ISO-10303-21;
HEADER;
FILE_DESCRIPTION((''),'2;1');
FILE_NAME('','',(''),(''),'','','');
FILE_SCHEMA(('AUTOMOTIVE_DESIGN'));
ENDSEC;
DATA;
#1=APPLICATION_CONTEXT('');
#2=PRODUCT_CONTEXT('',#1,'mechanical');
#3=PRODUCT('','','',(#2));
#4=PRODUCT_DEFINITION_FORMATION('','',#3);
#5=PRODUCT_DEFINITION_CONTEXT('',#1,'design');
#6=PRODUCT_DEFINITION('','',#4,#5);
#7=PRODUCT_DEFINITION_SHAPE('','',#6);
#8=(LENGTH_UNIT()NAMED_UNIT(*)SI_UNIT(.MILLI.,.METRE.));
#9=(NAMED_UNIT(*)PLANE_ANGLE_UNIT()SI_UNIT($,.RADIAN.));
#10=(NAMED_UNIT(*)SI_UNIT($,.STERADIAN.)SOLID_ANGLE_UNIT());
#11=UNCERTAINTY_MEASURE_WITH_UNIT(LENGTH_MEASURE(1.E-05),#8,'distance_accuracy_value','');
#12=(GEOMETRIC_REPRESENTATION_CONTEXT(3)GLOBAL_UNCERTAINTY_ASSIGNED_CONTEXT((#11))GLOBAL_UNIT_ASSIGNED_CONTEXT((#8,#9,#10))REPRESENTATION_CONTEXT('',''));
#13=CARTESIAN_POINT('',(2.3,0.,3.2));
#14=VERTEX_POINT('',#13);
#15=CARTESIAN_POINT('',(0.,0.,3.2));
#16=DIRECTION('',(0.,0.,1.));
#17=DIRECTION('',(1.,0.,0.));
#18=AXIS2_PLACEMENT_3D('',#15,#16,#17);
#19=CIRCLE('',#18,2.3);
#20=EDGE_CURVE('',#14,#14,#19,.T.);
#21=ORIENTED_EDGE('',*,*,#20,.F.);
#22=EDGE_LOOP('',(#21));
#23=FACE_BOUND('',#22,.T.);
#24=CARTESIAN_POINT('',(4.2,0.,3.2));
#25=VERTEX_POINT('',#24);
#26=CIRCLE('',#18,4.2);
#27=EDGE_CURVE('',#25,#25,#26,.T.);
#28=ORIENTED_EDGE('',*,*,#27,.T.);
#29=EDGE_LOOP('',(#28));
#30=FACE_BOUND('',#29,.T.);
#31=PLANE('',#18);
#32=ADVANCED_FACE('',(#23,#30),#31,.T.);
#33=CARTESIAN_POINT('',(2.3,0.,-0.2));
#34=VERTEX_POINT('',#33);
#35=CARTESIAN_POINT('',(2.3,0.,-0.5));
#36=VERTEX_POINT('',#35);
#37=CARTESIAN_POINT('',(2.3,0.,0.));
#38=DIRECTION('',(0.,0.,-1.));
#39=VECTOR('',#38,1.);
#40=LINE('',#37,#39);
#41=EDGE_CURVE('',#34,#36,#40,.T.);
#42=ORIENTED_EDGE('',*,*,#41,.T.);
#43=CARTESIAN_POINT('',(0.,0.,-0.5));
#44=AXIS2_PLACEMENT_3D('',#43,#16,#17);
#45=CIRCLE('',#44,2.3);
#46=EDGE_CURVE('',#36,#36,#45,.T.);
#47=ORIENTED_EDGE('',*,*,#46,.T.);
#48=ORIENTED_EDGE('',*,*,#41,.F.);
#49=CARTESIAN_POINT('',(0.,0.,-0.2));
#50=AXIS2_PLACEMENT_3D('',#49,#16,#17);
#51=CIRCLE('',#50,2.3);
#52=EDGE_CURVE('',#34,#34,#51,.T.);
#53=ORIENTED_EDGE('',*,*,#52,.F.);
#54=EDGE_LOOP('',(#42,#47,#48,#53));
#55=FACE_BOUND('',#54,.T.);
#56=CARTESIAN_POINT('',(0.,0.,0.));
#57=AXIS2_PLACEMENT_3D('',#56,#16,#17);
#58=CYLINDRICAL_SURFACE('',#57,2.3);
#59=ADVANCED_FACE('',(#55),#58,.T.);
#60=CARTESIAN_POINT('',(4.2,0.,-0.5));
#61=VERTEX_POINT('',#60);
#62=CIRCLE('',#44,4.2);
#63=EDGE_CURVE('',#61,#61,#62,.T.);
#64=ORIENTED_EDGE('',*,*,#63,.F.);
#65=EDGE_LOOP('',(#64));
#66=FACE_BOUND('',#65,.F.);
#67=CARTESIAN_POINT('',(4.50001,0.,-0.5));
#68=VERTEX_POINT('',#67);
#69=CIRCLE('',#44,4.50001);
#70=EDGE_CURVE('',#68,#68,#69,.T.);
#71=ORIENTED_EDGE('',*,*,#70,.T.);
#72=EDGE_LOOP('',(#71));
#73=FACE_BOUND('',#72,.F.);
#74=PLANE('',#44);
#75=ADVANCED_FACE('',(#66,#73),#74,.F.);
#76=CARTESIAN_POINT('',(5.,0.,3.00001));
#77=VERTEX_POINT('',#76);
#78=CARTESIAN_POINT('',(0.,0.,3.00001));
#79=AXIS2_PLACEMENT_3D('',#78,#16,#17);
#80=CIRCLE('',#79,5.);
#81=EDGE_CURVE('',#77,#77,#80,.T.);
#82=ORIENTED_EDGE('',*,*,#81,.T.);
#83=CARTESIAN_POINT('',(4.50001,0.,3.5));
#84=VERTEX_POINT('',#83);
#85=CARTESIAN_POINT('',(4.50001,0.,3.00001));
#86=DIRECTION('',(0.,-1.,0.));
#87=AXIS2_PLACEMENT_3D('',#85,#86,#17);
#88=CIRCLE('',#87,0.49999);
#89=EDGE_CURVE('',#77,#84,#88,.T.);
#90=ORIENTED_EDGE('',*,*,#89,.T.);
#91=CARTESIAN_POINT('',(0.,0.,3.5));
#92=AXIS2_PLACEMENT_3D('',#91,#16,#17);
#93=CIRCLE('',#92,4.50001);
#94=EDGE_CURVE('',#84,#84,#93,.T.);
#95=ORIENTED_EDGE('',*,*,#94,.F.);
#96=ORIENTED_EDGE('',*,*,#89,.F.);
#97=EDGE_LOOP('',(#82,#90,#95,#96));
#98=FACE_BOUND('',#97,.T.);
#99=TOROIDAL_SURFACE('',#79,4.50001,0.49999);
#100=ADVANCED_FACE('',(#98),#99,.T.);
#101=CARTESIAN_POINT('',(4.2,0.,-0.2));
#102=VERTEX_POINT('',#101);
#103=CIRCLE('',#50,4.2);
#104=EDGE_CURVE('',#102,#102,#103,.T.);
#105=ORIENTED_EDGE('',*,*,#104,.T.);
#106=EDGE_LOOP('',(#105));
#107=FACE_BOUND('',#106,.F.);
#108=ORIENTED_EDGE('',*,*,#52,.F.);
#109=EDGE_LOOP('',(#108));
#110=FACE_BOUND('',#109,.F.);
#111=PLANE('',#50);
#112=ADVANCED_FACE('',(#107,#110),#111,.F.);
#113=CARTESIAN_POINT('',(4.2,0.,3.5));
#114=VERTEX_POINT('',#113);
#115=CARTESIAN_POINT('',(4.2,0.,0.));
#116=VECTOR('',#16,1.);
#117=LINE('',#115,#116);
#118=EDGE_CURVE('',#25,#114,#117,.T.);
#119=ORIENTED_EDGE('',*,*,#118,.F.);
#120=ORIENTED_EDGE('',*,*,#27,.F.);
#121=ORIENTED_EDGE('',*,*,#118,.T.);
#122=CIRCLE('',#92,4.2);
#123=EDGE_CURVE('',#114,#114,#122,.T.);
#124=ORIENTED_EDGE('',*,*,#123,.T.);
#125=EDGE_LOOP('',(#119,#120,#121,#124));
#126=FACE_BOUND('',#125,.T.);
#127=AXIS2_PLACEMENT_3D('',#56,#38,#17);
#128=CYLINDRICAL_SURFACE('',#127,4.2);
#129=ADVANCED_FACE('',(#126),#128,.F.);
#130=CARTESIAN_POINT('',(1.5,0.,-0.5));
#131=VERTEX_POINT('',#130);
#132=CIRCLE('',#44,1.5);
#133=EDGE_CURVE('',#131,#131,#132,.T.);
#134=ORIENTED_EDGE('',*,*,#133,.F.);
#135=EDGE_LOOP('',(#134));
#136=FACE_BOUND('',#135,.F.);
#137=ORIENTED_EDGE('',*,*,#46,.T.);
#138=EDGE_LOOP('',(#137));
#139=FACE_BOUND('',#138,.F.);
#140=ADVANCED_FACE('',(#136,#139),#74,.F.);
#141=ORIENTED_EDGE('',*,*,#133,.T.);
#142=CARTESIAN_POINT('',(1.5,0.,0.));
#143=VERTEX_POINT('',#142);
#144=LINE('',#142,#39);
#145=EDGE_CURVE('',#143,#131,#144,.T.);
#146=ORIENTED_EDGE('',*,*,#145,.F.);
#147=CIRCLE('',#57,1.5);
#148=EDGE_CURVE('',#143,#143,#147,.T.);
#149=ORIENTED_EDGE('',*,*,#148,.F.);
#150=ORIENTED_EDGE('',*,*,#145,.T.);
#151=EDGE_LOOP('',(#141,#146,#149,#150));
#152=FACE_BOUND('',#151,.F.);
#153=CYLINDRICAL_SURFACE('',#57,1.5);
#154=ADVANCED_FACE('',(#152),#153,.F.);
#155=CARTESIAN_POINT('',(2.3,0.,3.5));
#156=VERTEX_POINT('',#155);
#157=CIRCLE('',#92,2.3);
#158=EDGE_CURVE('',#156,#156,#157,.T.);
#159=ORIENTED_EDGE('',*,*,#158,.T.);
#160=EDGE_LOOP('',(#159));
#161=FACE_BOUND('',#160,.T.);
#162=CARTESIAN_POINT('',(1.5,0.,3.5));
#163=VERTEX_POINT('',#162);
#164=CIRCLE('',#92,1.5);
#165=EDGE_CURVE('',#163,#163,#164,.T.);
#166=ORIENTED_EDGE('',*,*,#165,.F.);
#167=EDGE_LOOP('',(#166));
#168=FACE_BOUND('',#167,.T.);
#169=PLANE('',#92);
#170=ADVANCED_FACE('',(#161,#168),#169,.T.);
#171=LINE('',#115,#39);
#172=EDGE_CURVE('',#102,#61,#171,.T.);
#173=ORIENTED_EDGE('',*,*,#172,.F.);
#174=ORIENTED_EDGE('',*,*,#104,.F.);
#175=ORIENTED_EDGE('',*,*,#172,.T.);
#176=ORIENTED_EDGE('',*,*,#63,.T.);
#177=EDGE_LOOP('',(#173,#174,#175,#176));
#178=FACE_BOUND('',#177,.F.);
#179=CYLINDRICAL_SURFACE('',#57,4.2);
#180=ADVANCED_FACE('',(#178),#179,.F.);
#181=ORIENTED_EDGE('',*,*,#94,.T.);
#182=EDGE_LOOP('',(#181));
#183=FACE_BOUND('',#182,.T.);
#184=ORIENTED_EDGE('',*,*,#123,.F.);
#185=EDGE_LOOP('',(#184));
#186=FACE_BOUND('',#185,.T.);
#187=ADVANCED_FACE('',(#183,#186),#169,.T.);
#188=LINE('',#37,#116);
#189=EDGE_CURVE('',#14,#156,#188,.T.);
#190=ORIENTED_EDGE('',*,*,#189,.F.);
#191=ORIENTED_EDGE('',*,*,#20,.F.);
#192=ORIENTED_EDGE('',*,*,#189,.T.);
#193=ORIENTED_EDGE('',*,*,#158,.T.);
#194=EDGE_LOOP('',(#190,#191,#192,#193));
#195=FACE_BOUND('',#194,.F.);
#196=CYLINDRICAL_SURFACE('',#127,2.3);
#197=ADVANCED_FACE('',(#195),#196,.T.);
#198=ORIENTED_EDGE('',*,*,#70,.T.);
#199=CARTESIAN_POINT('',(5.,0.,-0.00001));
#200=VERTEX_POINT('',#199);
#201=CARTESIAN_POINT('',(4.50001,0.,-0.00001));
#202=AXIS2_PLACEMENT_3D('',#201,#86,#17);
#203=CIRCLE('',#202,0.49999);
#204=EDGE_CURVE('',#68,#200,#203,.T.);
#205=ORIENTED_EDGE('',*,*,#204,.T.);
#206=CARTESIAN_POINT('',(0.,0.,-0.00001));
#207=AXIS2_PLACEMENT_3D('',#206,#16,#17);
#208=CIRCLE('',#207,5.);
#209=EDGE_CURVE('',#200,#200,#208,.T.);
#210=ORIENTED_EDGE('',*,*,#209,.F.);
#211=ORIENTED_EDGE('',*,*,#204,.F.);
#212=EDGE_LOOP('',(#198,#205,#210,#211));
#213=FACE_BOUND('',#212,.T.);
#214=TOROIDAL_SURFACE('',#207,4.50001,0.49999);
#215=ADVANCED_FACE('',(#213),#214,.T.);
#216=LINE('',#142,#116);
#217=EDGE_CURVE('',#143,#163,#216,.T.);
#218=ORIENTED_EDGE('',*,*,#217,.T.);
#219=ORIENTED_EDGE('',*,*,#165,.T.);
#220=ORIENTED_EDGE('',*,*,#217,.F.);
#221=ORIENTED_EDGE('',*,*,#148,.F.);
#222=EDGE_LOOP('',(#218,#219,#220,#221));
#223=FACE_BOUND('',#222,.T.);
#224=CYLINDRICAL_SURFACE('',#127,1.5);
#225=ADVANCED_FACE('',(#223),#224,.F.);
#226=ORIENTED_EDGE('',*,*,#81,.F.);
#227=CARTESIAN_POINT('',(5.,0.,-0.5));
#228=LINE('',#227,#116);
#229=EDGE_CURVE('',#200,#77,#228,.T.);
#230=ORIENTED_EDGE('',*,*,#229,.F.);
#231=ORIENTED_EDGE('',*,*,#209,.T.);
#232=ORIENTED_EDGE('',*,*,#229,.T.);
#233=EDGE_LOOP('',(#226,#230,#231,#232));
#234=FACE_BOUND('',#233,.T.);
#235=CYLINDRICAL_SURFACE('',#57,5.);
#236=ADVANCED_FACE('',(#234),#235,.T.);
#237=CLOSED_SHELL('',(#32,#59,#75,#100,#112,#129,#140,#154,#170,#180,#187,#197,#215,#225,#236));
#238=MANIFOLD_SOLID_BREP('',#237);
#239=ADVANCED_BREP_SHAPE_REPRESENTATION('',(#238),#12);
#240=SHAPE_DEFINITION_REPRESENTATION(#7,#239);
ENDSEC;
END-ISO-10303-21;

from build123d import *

# Parameters (mm, degrees)
F0_R     = 5
F0_R_2   = 4.2
F1_DEPTH = 3.5
F0_R_3   = 2.3
F2_DEPTH = 3.2
F0_R_4   = 1.5
F3_DEPTH = 3.5
F4_DEPTH = 0.5
F5_DEPTH = 0.5
F6_DEPTH = 0.2
F7_R     = 0.49999


# Not quite as in the source:
# - a fillet or chamfer is up to 0.001 mm smaller than in the source, because OpenCascade refuses the exact size


with BuildPart() as f1:
    # F0 (on Top) → F1 (new body)
    with BuildSketch(Plane.XY):
        Circle(F0_R)
        Circle(F0_R_2, mode=Mode.SUBTRACT)
    extrude(amount=F1_DEPTH)

    # F0 (on Top) → F2 (join)
    with BuildSketch(Plane.XY):
        Circle(F0_R_2)
        Circle(F0_R_3, mode=Mode.SUBTRACT)
    extrude(amount=F2_DEPTH)

    # F0 (on Top) → F3 (join)
    with BuildSketch(Plane.XY):
        Circle(F0_R_3)
        Circle(F0_R_4, mode=Mode.SUBTRACT)
    extrude(amount=F3_DEPTH)

    # F0 (on Top) → F4 (join)
    with BuildSketch(Plane.XY):
        Circle(F0_R)
        Circle(F0_R_2, mode=Mode.SUBTRACT)
    extrude(amount=-F4_DEPTH)

    # F0 (on Top) → F5 (join)
    with BuildSketch(Plane.XY):
        Circle(F0_R_3)
        Circle(F0_R_4, mode=Mode.SUBTRACT)
    extrude(amount=-F5_DEPTH)

    # F0 (on Top) → F6 (join)
    with BuildSketch(Plane.XY):
        Circle(F0_R_2)
        Circle(F0_R_3, mode=Mode.SUBTRACT)
    extrude(amount=-F6_DEPTH)

    # F7 (radius 0.5 in the source; OpenCascade refuses exactly that, so slightly less here)
    f7_edges = [f1.edges().sort_by_distance(p)[0] for p in [
        (-5, 0, 3.5),
        (-5, 0, -0.5),
    ]]
    fillet(f7_edges, radius=F7_R)


solid = f1.part
